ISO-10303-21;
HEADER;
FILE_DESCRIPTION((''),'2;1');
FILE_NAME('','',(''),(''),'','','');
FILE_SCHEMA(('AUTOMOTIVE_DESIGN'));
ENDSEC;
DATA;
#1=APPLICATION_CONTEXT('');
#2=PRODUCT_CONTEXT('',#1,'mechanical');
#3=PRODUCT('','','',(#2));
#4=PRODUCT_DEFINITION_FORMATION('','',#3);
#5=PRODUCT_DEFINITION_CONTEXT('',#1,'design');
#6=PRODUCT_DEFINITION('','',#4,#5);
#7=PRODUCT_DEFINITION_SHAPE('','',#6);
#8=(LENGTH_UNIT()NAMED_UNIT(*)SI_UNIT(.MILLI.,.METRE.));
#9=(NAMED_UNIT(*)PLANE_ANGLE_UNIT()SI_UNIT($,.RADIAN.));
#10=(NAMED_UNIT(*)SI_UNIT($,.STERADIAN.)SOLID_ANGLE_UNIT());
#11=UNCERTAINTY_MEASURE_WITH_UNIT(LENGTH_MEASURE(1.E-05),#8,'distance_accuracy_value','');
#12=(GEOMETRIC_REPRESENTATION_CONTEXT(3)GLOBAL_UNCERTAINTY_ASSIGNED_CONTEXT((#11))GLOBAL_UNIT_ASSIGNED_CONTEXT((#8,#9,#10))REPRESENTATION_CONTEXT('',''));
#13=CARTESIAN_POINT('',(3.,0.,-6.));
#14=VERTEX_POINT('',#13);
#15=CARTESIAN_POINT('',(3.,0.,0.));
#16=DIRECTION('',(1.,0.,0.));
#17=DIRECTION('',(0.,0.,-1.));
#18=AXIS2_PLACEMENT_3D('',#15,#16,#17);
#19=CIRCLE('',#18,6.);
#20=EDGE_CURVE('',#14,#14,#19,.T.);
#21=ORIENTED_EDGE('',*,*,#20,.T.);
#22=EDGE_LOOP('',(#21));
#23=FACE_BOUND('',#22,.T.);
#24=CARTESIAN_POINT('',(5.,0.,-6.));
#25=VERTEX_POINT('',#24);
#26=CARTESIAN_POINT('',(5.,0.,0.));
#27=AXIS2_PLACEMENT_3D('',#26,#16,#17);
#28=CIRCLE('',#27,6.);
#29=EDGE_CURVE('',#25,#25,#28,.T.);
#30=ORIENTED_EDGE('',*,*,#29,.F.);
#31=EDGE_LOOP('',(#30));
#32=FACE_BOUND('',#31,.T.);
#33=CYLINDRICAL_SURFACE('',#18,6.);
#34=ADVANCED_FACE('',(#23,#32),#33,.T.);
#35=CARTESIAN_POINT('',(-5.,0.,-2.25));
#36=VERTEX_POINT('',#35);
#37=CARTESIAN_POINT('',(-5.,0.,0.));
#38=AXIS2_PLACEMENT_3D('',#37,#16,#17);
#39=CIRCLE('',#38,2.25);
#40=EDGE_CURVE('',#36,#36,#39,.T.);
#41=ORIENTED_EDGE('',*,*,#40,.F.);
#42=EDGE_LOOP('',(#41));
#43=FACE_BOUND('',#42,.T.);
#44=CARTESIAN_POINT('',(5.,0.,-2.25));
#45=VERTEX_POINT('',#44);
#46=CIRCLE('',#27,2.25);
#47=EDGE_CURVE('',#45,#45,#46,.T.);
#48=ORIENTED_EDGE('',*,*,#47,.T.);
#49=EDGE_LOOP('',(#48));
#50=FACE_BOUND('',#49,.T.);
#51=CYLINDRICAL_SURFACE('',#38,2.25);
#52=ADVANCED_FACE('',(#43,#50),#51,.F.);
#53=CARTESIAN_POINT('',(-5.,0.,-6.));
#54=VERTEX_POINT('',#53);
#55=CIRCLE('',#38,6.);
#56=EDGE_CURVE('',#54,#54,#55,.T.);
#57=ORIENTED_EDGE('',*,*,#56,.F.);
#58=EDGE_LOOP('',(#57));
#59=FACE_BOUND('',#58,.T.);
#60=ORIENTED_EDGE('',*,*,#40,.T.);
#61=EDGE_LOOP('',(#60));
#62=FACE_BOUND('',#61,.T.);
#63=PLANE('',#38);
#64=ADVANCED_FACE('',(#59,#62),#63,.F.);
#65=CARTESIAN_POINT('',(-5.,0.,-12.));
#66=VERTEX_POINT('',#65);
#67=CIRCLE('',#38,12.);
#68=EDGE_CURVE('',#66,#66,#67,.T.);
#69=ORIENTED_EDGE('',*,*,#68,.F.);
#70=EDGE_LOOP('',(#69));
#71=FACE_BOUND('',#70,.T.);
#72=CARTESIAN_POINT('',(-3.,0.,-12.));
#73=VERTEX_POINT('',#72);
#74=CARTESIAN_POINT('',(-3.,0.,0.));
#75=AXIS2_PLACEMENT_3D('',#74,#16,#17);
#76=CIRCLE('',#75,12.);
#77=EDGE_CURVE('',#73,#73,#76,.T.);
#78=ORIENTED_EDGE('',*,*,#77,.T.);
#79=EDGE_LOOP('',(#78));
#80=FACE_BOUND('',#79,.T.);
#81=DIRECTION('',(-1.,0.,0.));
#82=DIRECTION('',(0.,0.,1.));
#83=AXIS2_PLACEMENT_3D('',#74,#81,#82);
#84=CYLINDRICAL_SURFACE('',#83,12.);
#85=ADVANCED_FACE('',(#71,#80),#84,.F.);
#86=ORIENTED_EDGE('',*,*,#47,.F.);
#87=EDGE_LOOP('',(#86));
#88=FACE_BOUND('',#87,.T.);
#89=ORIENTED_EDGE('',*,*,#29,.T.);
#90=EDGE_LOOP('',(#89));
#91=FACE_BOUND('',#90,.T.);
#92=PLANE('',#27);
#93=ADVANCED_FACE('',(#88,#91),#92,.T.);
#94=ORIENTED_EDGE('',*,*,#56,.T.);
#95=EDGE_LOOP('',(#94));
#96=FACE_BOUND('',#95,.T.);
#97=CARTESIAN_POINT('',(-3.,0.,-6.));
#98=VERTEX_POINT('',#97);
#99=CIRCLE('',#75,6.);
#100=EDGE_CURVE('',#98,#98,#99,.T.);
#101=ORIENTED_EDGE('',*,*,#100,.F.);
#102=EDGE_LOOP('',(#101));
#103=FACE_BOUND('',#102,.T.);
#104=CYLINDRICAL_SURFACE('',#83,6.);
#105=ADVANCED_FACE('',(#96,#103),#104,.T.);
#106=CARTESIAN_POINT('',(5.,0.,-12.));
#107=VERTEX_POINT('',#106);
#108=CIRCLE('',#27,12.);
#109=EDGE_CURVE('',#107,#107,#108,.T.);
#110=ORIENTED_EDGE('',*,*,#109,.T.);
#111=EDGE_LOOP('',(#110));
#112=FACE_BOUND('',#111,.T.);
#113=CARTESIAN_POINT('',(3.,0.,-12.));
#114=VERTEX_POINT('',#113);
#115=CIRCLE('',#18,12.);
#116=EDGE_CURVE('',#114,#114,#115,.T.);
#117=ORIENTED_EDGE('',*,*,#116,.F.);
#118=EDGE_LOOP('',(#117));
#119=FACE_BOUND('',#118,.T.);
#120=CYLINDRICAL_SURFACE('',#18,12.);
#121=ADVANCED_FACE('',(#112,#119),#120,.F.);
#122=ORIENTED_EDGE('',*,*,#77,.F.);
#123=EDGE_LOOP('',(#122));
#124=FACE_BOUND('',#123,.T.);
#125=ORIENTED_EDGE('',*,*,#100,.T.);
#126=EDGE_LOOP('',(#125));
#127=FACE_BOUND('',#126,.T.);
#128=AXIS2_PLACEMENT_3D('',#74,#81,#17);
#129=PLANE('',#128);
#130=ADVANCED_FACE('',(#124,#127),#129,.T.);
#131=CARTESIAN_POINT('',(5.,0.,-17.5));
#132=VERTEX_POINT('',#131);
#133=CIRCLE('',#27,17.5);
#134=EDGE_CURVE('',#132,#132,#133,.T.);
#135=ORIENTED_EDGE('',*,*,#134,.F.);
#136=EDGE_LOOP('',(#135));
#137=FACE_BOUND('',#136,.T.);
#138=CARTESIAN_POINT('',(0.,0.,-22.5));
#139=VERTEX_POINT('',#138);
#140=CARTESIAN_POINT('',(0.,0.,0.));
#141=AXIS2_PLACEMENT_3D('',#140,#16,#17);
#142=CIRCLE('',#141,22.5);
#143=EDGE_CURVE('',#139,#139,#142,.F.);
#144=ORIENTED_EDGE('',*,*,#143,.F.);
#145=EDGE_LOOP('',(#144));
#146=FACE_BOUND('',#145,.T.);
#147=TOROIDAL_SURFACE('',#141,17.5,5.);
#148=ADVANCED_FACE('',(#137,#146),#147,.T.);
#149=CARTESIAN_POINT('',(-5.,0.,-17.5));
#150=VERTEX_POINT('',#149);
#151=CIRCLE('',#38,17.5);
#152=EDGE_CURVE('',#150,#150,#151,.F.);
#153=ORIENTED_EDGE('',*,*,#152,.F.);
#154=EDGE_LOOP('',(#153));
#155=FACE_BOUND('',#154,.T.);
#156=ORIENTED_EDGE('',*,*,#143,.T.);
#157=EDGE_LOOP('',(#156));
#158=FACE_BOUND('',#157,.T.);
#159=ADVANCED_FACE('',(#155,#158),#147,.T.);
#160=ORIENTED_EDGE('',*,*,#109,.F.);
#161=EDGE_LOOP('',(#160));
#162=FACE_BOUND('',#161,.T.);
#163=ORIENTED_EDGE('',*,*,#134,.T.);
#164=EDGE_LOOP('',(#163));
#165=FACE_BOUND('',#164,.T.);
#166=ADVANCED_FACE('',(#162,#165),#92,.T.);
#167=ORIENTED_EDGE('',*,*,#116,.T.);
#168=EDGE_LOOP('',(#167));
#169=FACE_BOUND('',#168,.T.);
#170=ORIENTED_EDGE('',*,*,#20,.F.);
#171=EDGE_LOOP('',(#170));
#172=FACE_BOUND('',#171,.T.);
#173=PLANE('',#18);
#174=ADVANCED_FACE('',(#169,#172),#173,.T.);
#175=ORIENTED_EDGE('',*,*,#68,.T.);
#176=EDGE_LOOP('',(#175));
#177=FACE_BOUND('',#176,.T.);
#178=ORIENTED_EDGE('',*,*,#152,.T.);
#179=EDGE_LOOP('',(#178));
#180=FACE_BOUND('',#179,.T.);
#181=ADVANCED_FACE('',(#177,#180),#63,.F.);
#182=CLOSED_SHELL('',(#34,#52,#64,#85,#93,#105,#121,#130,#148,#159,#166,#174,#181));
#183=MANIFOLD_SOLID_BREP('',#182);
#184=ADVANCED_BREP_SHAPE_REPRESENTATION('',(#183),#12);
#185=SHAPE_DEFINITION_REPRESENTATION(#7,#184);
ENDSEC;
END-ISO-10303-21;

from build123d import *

# Parameters (mm, degrees)
SKETCH2_R           = 22.5
BOSS_EXTRUDE1_DEPTH = 5
FILLET1_R           = 5
SKETCH3_R           = 12
SKETCH3_R_2         = 6
CUT_EXTRUDE1_DEPTH  = 2
SKETCH4_R           = 2.25
CUT_EXTRUDE2_DEPTH  = 34.354160228


with BuildPart() as part:
    # Sketch2 → Boss-Extrude1 (new, symmetric)
    with BuildSketch(Plane(origin=(0, 0, 0), x_dir=(0, 0, -1), z_dir=(1, 0, 0))):
        Circle(SKETCH2_R)
    extrude(amount=BOSS_EXTRUDE1_DEPTH, both=True)

    # Fillet1
    fillet1_edges = [part.edges().sort_by_distance(p)[0] for p in [
        (-5, 0, 22.5),
        (5, 0, 22.5),
    ]]
    fillet(fillet1_edges, radius=FILLET1_R - 0.0001)  # a hair under: the kernel refuses the full size

    # Sketch3 → Cut-Extrude1 (cut)
    with BuildSketch(Plane(origin=(5, 0, 0), x_dir=(0, 0, -1), z_dir=(1, 0, 0))):
        Circle(SKETCH3_R)
        Circle(SKETCH3_R_2, mode=Mode.SUBTRACT)
    cut_extrude1 = extrude(amount=-CUT_EXTRUDE1_DEPTH, mode=Mode.SUBTRACT)

    # Mirror1: Cut-Extrude1 across plane
    add(cut_extrude1.mirror(Plane(origin=(0, 0, 0), x_dir=(0, 0, 1), z_dir=(1, 0, 0))), mode=Mode.SUBTRACT)

    # Sketch4 → Cut-Extrude2 (cut, through all)
    with BuildSketch(Plane(origin=(5, 0, 0), x_dir=(0, 0, -1), z_dir=(1, 0, 0))):
        Circle(SKETCH4_R)
    extrude(amount=-CUT_EXTRUDE2_DEPTH, mode=Mode.SUBTRACT)


solid = part.part
